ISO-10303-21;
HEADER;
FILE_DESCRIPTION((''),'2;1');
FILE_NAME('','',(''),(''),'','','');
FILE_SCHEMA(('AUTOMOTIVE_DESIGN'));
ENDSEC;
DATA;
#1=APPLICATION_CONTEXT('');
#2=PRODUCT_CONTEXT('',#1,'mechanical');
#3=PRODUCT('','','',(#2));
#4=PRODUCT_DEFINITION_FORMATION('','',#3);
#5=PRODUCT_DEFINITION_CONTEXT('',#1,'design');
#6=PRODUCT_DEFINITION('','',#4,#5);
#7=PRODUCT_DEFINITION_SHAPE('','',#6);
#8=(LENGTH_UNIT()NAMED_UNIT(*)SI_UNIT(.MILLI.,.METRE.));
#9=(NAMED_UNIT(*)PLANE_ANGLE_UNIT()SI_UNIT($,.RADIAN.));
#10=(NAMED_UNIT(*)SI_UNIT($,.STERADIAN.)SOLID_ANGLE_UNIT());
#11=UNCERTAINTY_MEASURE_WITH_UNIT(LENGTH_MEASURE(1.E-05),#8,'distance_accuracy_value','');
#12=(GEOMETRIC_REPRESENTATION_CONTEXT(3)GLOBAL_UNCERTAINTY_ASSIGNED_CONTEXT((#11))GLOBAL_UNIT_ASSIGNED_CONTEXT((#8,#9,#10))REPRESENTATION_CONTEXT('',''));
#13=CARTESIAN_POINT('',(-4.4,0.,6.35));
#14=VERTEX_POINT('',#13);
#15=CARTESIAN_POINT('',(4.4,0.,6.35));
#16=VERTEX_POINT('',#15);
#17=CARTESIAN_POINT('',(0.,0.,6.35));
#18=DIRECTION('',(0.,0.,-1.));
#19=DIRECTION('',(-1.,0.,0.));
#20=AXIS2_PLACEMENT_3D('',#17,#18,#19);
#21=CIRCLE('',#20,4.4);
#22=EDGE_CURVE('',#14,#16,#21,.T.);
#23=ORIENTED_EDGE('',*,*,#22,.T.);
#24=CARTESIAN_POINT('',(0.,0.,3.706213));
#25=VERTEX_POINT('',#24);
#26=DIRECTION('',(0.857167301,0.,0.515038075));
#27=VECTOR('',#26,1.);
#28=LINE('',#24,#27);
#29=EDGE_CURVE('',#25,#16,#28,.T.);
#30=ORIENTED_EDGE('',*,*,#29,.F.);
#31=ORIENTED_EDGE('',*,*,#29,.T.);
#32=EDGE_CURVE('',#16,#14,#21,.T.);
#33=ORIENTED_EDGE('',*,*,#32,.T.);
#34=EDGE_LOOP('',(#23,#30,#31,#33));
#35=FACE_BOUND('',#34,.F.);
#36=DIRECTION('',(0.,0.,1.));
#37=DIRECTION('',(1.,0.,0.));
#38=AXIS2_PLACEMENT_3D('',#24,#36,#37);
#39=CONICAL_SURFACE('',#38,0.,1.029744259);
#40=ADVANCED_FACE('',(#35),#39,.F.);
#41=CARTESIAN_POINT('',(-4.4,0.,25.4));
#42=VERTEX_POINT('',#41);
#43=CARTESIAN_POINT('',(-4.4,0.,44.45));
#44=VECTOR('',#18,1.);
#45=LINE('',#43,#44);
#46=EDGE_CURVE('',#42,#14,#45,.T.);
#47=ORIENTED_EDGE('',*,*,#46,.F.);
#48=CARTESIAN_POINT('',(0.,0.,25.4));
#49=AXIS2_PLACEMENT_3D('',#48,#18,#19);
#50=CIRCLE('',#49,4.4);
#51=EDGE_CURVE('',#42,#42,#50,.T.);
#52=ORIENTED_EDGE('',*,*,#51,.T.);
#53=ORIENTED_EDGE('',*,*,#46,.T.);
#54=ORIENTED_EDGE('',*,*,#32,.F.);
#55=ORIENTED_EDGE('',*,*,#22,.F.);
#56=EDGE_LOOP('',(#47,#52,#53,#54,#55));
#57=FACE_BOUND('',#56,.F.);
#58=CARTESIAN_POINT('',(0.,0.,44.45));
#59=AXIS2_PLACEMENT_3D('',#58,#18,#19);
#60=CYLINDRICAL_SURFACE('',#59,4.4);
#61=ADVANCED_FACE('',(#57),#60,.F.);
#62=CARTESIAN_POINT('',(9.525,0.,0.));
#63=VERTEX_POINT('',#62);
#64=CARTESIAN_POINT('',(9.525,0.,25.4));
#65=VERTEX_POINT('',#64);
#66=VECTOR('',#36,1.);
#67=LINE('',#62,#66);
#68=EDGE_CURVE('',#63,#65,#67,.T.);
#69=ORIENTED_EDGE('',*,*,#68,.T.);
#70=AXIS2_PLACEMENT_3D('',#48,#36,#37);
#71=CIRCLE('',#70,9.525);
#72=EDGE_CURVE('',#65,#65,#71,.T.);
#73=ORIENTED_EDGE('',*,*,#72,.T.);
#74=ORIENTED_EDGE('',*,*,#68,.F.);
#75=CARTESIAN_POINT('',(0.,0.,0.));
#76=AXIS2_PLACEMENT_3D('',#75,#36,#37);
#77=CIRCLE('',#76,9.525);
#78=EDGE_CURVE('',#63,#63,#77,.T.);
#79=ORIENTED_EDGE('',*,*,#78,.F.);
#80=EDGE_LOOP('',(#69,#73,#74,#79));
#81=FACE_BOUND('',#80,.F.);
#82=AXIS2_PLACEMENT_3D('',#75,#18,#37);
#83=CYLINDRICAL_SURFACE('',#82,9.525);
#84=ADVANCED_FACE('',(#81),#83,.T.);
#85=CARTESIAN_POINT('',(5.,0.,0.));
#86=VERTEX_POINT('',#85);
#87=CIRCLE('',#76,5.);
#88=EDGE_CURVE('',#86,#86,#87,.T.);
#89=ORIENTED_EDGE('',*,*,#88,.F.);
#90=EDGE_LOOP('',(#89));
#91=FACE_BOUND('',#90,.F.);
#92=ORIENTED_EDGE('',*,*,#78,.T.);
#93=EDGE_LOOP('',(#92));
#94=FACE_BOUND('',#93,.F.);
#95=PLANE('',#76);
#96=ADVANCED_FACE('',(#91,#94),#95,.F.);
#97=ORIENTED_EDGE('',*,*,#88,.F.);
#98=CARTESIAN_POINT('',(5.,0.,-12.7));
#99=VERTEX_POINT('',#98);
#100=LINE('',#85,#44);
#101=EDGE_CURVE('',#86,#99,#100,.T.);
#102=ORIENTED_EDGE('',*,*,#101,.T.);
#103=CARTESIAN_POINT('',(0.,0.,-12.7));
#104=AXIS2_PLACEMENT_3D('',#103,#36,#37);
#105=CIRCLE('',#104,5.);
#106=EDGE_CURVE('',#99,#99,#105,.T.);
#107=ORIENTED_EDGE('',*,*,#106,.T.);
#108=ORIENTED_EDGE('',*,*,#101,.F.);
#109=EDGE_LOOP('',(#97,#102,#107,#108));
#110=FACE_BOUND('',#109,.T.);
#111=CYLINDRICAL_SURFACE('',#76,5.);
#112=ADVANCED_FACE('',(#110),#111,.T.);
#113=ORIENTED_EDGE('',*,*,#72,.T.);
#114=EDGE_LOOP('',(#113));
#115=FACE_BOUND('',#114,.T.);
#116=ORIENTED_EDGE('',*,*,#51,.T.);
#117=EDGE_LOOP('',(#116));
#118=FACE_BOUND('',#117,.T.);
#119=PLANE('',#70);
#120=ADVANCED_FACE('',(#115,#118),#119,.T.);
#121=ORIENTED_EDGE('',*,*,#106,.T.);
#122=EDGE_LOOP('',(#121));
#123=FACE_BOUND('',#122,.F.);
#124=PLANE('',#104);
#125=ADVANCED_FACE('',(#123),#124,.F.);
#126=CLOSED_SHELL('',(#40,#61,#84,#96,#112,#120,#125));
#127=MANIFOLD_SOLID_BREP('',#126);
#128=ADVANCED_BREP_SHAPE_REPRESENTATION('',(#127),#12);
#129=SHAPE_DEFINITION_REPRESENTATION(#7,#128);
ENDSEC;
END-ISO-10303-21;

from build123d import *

# Parameters (mm, degrees)
F0_R     = 9.525
F0_R_2   = 5
F1_DEPTH = 25.4
F2_DEPTH = 12.7
F4_D     = 8.8
F4_DEPTH = 19.05
F4_TIP   = 2.6437867237


with BuildPart() as f1:
    # F0 (on Top) → F1 (new body)
    with BuildSketch(Plane.XY):
        Circle(F0_R)
        Circle(F0_R_2, mode=Mode.SUBTRACT)
        Circle(F0_R_2)
    extrude(amount=F1_DEPTH)

    # F0 (on Top) → F2 (join)
    with BuildSketch(Plane.XY):
        Circle(F0_R_2)
    extrude(amount=-F2_DEPTH)

    # F4
    with Locations(Plane.XY.offset(25.4)):
        with Locations((0, 0)):
            Hole(F4_D / 2, depth=F4_DEPTH)
            with Locations((0, 0, -(F4_DEPTH + F4_TIP / 2))):  # 118° drill point
                Cone(0, F4_D / 2, F4_TIP, mode=Mode.SUBTRACT)


solid = f1.part
